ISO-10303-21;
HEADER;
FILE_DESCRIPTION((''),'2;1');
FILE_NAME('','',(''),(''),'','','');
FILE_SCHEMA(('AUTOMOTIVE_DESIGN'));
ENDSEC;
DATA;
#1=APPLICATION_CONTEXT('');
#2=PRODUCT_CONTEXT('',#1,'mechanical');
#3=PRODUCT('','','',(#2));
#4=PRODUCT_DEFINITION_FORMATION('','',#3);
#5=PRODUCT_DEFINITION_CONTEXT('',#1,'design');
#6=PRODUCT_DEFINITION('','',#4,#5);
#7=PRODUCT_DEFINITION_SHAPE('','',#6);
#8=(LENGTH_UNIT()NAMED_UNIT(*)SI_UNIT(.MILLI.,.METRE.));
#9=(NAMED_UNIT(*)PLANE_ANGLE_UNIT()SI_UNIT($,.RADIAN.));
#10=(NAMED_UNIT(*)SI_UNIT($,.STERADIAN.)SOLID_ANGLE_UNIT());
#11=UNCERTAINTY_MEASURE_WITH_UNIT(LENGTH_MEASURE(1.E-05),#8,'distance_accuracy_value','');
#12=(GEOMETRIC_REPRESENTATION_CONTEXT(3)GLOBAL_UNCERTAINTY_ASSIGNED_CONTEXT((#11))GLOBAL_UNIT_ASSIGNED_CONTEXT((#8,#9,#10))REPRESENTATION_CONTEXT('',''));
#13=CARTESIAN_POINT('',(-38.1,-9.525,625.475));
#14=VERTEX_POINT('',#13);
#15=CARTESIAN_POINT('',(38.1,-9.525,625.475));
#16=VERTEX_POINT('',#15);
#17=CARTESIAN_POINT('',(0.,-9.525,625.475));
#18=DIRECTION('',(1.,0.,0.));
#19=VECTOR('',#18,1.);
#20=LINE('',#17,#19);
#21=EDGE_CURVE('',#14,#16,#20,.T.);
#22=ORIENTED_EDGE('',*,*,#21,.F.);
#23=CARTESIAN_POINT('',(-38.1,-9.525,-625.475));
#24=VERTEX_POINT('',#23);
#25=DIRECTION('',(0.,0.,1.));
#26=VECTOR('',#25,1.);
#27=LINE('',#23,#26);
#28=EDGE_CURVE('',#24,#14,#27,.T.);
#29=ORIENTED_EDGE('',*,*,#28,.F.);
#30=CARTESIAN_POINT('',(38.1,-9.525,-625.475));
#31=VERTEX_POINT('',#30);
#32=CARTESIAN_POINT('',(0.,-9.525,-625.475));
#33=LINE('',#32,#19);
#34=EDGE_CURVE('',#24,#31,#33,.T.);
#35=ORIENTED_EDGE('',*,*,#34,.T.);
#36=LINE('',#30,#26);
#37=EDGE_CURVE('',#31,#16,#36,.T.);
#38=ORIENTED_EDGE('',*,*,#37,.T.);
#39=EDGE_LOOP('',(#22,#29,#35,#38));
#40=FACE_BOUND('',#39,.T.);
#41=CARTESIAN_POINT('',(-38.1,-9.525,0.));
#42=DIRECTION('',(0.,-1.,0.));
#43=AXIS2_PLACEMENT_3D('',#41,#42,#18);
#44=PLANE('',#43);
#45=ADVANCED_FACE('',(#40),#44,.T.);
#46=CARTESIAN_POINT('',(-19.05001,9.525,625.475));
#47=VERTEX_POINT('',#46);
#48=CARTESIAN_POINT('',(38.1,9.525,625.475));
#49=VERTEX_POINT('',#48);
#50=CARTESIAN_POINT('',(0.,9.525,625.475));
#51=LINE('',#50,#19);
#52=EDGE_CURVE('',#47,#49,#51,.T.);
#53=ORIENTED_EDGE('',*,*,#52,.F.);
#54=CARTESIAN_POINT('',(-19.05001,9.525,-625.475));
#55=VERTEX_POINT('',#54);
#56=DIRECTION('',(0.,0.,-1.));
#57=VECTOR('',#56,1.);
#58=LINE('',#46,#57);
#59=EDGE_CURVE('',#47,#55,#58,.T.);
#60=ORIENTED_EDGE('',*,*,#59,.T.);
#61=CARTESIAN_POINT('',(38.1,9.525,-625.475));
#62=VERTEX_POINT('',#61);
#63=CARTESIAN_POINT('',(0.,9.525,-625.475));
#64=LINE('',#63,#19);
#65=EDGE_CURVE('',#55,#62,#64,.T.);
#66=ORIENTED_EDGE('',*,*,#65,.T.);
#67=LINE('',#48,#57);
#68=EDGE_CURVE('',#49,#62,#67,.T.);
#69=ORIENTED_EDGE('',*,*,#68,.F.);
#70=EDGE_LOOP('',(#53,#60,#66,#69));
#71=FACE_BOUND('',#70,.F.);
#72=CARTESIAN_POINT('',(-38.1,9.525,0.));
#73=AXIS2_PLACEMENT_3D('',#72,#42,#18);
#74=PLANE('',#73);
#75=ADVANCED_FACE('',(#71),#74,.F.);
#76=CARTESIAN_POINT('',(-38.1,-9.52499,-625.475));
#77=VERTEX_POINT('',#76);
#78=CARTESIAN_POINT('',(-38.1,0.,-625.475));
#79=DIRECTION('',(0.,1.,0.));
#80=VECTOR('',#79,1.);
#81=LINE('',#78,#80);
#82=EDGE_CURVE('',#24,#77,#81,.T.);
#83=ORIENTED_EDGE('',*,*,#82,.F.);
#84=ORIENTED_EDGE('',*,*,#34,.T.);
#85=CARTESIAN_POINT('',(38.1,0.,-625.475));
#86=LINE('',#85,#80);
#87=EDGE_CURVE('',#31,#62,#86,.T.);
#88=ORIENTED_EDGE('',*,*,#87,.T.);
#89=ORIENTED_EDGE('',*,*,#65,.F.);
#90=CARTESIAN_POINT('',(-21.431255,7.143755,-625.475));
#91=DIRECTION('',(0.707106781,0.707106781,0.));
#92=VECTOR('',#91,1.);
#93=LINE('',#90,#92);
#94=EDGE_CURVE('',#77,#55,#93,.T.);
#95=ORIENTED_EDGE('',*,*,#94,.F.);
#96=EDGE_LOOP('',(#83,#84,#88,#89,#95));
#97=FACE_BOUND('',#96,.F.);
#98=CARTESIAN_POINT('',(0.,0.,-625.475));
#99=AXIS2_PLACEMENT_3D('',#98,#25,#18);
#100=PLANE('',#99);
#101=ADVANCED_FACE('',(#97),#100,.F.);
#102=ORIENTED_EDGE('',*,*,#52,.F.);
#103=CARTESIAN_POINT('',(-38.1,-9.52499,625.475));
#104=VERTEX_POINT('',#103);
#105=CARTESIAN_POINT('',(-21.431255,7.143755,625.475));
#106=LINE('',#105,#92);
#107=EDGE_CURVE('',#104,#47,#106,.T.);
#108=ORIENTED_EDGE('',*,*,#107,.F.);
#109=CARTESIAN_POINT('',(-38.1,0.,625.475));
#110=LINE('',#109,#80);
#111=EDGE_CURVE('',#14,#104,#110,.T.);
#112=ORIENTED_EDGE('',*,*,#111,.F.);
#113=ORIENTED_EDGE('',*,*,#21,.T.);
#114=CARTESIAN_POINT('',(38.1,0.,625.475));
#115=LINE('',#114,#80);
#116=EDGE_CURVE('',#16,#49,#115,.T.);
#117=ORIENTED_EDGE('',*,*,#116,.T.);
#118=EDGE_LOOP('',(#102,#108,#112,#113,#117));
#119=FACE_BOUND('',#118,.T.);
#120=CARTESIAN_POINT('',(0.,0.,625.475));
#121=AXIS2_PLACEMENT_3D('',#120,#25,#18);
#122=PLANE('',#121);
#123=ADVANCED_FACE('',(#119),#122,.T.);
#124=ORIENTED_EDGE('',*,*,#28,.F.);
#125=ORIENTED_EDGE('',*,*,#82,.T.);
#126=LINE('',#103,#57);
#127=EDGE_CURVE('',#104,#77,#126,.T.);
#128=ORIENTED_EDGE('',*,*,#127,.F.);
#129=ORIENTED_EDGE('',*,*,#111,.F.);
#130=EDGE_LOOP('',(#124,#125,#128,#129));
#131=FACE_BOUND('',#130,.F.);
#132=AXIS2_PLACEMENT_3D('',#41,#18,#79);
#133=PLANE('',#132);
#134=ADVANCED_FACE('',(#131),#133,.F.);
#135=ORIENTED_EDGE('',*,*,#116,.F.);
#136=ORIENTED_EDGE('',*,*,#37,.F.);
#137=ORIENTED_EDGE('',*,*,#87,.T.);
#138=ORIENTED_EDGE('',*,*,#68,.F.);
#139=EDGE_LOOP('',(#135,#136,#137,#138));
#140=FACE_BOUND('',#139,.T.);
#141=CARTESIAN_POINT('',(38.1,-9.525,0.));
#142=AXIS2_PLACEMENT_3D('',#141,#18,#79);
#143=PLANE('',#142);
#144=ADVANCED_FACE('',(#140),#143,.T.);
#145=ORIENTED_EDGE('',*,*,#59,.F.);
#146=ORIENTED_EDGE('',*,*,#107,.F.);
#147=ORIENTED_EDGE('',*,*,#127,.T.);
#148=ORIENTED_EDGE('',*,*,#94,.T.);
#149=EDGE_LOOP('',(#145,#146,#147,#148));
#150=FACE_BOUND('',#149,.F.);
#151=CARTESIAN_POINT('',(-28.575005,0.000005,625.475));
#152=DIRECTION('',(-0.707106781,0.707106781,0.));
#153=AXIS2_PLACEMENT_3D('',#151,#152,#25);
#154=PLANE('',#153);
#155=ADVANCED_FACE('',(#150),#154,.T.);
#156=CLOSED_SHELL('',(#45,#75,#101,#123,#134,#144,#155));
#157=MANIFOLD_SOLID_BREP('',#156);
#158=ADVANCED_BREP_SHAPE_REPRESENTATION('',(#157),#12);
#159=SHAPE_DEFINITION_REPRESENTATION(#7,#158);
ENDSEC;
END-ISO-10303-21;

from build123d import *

# Parameters (mm, degrees)
F0_W     = 76.2
F0_H     = 19.05
F1_DEPTH = 625.475
F2_SIZE2 = 19.04999
F2_SIZE  = 19.04999


# Not quite as in the source:
# - a fillet or chamfer is up to 0.001 mm smaller than in the source, because OpenCascade refuses the exact size


with BuildPart() as f1:
    # F0 (on Top) → F1 (new body, symmetric)
    with BuildSketch(Plane.XY):
        Rectangle(F0_W, F0_H)
    extrude(amount=F1_DEPTH, both=True)

    # F2 (size 19.05 and 19.05 in the source; OpenCascade refuses exactly that, so slightly less here)
    f2_edges = [f1.edges().sort_by_distance(p)[0] for p in [
        (-38.1, 9.525, 0),
    ]]
    chamfer(f2_edges, length=F2_SIZE, length2=F2_SIZE2)


solid = f1.part
